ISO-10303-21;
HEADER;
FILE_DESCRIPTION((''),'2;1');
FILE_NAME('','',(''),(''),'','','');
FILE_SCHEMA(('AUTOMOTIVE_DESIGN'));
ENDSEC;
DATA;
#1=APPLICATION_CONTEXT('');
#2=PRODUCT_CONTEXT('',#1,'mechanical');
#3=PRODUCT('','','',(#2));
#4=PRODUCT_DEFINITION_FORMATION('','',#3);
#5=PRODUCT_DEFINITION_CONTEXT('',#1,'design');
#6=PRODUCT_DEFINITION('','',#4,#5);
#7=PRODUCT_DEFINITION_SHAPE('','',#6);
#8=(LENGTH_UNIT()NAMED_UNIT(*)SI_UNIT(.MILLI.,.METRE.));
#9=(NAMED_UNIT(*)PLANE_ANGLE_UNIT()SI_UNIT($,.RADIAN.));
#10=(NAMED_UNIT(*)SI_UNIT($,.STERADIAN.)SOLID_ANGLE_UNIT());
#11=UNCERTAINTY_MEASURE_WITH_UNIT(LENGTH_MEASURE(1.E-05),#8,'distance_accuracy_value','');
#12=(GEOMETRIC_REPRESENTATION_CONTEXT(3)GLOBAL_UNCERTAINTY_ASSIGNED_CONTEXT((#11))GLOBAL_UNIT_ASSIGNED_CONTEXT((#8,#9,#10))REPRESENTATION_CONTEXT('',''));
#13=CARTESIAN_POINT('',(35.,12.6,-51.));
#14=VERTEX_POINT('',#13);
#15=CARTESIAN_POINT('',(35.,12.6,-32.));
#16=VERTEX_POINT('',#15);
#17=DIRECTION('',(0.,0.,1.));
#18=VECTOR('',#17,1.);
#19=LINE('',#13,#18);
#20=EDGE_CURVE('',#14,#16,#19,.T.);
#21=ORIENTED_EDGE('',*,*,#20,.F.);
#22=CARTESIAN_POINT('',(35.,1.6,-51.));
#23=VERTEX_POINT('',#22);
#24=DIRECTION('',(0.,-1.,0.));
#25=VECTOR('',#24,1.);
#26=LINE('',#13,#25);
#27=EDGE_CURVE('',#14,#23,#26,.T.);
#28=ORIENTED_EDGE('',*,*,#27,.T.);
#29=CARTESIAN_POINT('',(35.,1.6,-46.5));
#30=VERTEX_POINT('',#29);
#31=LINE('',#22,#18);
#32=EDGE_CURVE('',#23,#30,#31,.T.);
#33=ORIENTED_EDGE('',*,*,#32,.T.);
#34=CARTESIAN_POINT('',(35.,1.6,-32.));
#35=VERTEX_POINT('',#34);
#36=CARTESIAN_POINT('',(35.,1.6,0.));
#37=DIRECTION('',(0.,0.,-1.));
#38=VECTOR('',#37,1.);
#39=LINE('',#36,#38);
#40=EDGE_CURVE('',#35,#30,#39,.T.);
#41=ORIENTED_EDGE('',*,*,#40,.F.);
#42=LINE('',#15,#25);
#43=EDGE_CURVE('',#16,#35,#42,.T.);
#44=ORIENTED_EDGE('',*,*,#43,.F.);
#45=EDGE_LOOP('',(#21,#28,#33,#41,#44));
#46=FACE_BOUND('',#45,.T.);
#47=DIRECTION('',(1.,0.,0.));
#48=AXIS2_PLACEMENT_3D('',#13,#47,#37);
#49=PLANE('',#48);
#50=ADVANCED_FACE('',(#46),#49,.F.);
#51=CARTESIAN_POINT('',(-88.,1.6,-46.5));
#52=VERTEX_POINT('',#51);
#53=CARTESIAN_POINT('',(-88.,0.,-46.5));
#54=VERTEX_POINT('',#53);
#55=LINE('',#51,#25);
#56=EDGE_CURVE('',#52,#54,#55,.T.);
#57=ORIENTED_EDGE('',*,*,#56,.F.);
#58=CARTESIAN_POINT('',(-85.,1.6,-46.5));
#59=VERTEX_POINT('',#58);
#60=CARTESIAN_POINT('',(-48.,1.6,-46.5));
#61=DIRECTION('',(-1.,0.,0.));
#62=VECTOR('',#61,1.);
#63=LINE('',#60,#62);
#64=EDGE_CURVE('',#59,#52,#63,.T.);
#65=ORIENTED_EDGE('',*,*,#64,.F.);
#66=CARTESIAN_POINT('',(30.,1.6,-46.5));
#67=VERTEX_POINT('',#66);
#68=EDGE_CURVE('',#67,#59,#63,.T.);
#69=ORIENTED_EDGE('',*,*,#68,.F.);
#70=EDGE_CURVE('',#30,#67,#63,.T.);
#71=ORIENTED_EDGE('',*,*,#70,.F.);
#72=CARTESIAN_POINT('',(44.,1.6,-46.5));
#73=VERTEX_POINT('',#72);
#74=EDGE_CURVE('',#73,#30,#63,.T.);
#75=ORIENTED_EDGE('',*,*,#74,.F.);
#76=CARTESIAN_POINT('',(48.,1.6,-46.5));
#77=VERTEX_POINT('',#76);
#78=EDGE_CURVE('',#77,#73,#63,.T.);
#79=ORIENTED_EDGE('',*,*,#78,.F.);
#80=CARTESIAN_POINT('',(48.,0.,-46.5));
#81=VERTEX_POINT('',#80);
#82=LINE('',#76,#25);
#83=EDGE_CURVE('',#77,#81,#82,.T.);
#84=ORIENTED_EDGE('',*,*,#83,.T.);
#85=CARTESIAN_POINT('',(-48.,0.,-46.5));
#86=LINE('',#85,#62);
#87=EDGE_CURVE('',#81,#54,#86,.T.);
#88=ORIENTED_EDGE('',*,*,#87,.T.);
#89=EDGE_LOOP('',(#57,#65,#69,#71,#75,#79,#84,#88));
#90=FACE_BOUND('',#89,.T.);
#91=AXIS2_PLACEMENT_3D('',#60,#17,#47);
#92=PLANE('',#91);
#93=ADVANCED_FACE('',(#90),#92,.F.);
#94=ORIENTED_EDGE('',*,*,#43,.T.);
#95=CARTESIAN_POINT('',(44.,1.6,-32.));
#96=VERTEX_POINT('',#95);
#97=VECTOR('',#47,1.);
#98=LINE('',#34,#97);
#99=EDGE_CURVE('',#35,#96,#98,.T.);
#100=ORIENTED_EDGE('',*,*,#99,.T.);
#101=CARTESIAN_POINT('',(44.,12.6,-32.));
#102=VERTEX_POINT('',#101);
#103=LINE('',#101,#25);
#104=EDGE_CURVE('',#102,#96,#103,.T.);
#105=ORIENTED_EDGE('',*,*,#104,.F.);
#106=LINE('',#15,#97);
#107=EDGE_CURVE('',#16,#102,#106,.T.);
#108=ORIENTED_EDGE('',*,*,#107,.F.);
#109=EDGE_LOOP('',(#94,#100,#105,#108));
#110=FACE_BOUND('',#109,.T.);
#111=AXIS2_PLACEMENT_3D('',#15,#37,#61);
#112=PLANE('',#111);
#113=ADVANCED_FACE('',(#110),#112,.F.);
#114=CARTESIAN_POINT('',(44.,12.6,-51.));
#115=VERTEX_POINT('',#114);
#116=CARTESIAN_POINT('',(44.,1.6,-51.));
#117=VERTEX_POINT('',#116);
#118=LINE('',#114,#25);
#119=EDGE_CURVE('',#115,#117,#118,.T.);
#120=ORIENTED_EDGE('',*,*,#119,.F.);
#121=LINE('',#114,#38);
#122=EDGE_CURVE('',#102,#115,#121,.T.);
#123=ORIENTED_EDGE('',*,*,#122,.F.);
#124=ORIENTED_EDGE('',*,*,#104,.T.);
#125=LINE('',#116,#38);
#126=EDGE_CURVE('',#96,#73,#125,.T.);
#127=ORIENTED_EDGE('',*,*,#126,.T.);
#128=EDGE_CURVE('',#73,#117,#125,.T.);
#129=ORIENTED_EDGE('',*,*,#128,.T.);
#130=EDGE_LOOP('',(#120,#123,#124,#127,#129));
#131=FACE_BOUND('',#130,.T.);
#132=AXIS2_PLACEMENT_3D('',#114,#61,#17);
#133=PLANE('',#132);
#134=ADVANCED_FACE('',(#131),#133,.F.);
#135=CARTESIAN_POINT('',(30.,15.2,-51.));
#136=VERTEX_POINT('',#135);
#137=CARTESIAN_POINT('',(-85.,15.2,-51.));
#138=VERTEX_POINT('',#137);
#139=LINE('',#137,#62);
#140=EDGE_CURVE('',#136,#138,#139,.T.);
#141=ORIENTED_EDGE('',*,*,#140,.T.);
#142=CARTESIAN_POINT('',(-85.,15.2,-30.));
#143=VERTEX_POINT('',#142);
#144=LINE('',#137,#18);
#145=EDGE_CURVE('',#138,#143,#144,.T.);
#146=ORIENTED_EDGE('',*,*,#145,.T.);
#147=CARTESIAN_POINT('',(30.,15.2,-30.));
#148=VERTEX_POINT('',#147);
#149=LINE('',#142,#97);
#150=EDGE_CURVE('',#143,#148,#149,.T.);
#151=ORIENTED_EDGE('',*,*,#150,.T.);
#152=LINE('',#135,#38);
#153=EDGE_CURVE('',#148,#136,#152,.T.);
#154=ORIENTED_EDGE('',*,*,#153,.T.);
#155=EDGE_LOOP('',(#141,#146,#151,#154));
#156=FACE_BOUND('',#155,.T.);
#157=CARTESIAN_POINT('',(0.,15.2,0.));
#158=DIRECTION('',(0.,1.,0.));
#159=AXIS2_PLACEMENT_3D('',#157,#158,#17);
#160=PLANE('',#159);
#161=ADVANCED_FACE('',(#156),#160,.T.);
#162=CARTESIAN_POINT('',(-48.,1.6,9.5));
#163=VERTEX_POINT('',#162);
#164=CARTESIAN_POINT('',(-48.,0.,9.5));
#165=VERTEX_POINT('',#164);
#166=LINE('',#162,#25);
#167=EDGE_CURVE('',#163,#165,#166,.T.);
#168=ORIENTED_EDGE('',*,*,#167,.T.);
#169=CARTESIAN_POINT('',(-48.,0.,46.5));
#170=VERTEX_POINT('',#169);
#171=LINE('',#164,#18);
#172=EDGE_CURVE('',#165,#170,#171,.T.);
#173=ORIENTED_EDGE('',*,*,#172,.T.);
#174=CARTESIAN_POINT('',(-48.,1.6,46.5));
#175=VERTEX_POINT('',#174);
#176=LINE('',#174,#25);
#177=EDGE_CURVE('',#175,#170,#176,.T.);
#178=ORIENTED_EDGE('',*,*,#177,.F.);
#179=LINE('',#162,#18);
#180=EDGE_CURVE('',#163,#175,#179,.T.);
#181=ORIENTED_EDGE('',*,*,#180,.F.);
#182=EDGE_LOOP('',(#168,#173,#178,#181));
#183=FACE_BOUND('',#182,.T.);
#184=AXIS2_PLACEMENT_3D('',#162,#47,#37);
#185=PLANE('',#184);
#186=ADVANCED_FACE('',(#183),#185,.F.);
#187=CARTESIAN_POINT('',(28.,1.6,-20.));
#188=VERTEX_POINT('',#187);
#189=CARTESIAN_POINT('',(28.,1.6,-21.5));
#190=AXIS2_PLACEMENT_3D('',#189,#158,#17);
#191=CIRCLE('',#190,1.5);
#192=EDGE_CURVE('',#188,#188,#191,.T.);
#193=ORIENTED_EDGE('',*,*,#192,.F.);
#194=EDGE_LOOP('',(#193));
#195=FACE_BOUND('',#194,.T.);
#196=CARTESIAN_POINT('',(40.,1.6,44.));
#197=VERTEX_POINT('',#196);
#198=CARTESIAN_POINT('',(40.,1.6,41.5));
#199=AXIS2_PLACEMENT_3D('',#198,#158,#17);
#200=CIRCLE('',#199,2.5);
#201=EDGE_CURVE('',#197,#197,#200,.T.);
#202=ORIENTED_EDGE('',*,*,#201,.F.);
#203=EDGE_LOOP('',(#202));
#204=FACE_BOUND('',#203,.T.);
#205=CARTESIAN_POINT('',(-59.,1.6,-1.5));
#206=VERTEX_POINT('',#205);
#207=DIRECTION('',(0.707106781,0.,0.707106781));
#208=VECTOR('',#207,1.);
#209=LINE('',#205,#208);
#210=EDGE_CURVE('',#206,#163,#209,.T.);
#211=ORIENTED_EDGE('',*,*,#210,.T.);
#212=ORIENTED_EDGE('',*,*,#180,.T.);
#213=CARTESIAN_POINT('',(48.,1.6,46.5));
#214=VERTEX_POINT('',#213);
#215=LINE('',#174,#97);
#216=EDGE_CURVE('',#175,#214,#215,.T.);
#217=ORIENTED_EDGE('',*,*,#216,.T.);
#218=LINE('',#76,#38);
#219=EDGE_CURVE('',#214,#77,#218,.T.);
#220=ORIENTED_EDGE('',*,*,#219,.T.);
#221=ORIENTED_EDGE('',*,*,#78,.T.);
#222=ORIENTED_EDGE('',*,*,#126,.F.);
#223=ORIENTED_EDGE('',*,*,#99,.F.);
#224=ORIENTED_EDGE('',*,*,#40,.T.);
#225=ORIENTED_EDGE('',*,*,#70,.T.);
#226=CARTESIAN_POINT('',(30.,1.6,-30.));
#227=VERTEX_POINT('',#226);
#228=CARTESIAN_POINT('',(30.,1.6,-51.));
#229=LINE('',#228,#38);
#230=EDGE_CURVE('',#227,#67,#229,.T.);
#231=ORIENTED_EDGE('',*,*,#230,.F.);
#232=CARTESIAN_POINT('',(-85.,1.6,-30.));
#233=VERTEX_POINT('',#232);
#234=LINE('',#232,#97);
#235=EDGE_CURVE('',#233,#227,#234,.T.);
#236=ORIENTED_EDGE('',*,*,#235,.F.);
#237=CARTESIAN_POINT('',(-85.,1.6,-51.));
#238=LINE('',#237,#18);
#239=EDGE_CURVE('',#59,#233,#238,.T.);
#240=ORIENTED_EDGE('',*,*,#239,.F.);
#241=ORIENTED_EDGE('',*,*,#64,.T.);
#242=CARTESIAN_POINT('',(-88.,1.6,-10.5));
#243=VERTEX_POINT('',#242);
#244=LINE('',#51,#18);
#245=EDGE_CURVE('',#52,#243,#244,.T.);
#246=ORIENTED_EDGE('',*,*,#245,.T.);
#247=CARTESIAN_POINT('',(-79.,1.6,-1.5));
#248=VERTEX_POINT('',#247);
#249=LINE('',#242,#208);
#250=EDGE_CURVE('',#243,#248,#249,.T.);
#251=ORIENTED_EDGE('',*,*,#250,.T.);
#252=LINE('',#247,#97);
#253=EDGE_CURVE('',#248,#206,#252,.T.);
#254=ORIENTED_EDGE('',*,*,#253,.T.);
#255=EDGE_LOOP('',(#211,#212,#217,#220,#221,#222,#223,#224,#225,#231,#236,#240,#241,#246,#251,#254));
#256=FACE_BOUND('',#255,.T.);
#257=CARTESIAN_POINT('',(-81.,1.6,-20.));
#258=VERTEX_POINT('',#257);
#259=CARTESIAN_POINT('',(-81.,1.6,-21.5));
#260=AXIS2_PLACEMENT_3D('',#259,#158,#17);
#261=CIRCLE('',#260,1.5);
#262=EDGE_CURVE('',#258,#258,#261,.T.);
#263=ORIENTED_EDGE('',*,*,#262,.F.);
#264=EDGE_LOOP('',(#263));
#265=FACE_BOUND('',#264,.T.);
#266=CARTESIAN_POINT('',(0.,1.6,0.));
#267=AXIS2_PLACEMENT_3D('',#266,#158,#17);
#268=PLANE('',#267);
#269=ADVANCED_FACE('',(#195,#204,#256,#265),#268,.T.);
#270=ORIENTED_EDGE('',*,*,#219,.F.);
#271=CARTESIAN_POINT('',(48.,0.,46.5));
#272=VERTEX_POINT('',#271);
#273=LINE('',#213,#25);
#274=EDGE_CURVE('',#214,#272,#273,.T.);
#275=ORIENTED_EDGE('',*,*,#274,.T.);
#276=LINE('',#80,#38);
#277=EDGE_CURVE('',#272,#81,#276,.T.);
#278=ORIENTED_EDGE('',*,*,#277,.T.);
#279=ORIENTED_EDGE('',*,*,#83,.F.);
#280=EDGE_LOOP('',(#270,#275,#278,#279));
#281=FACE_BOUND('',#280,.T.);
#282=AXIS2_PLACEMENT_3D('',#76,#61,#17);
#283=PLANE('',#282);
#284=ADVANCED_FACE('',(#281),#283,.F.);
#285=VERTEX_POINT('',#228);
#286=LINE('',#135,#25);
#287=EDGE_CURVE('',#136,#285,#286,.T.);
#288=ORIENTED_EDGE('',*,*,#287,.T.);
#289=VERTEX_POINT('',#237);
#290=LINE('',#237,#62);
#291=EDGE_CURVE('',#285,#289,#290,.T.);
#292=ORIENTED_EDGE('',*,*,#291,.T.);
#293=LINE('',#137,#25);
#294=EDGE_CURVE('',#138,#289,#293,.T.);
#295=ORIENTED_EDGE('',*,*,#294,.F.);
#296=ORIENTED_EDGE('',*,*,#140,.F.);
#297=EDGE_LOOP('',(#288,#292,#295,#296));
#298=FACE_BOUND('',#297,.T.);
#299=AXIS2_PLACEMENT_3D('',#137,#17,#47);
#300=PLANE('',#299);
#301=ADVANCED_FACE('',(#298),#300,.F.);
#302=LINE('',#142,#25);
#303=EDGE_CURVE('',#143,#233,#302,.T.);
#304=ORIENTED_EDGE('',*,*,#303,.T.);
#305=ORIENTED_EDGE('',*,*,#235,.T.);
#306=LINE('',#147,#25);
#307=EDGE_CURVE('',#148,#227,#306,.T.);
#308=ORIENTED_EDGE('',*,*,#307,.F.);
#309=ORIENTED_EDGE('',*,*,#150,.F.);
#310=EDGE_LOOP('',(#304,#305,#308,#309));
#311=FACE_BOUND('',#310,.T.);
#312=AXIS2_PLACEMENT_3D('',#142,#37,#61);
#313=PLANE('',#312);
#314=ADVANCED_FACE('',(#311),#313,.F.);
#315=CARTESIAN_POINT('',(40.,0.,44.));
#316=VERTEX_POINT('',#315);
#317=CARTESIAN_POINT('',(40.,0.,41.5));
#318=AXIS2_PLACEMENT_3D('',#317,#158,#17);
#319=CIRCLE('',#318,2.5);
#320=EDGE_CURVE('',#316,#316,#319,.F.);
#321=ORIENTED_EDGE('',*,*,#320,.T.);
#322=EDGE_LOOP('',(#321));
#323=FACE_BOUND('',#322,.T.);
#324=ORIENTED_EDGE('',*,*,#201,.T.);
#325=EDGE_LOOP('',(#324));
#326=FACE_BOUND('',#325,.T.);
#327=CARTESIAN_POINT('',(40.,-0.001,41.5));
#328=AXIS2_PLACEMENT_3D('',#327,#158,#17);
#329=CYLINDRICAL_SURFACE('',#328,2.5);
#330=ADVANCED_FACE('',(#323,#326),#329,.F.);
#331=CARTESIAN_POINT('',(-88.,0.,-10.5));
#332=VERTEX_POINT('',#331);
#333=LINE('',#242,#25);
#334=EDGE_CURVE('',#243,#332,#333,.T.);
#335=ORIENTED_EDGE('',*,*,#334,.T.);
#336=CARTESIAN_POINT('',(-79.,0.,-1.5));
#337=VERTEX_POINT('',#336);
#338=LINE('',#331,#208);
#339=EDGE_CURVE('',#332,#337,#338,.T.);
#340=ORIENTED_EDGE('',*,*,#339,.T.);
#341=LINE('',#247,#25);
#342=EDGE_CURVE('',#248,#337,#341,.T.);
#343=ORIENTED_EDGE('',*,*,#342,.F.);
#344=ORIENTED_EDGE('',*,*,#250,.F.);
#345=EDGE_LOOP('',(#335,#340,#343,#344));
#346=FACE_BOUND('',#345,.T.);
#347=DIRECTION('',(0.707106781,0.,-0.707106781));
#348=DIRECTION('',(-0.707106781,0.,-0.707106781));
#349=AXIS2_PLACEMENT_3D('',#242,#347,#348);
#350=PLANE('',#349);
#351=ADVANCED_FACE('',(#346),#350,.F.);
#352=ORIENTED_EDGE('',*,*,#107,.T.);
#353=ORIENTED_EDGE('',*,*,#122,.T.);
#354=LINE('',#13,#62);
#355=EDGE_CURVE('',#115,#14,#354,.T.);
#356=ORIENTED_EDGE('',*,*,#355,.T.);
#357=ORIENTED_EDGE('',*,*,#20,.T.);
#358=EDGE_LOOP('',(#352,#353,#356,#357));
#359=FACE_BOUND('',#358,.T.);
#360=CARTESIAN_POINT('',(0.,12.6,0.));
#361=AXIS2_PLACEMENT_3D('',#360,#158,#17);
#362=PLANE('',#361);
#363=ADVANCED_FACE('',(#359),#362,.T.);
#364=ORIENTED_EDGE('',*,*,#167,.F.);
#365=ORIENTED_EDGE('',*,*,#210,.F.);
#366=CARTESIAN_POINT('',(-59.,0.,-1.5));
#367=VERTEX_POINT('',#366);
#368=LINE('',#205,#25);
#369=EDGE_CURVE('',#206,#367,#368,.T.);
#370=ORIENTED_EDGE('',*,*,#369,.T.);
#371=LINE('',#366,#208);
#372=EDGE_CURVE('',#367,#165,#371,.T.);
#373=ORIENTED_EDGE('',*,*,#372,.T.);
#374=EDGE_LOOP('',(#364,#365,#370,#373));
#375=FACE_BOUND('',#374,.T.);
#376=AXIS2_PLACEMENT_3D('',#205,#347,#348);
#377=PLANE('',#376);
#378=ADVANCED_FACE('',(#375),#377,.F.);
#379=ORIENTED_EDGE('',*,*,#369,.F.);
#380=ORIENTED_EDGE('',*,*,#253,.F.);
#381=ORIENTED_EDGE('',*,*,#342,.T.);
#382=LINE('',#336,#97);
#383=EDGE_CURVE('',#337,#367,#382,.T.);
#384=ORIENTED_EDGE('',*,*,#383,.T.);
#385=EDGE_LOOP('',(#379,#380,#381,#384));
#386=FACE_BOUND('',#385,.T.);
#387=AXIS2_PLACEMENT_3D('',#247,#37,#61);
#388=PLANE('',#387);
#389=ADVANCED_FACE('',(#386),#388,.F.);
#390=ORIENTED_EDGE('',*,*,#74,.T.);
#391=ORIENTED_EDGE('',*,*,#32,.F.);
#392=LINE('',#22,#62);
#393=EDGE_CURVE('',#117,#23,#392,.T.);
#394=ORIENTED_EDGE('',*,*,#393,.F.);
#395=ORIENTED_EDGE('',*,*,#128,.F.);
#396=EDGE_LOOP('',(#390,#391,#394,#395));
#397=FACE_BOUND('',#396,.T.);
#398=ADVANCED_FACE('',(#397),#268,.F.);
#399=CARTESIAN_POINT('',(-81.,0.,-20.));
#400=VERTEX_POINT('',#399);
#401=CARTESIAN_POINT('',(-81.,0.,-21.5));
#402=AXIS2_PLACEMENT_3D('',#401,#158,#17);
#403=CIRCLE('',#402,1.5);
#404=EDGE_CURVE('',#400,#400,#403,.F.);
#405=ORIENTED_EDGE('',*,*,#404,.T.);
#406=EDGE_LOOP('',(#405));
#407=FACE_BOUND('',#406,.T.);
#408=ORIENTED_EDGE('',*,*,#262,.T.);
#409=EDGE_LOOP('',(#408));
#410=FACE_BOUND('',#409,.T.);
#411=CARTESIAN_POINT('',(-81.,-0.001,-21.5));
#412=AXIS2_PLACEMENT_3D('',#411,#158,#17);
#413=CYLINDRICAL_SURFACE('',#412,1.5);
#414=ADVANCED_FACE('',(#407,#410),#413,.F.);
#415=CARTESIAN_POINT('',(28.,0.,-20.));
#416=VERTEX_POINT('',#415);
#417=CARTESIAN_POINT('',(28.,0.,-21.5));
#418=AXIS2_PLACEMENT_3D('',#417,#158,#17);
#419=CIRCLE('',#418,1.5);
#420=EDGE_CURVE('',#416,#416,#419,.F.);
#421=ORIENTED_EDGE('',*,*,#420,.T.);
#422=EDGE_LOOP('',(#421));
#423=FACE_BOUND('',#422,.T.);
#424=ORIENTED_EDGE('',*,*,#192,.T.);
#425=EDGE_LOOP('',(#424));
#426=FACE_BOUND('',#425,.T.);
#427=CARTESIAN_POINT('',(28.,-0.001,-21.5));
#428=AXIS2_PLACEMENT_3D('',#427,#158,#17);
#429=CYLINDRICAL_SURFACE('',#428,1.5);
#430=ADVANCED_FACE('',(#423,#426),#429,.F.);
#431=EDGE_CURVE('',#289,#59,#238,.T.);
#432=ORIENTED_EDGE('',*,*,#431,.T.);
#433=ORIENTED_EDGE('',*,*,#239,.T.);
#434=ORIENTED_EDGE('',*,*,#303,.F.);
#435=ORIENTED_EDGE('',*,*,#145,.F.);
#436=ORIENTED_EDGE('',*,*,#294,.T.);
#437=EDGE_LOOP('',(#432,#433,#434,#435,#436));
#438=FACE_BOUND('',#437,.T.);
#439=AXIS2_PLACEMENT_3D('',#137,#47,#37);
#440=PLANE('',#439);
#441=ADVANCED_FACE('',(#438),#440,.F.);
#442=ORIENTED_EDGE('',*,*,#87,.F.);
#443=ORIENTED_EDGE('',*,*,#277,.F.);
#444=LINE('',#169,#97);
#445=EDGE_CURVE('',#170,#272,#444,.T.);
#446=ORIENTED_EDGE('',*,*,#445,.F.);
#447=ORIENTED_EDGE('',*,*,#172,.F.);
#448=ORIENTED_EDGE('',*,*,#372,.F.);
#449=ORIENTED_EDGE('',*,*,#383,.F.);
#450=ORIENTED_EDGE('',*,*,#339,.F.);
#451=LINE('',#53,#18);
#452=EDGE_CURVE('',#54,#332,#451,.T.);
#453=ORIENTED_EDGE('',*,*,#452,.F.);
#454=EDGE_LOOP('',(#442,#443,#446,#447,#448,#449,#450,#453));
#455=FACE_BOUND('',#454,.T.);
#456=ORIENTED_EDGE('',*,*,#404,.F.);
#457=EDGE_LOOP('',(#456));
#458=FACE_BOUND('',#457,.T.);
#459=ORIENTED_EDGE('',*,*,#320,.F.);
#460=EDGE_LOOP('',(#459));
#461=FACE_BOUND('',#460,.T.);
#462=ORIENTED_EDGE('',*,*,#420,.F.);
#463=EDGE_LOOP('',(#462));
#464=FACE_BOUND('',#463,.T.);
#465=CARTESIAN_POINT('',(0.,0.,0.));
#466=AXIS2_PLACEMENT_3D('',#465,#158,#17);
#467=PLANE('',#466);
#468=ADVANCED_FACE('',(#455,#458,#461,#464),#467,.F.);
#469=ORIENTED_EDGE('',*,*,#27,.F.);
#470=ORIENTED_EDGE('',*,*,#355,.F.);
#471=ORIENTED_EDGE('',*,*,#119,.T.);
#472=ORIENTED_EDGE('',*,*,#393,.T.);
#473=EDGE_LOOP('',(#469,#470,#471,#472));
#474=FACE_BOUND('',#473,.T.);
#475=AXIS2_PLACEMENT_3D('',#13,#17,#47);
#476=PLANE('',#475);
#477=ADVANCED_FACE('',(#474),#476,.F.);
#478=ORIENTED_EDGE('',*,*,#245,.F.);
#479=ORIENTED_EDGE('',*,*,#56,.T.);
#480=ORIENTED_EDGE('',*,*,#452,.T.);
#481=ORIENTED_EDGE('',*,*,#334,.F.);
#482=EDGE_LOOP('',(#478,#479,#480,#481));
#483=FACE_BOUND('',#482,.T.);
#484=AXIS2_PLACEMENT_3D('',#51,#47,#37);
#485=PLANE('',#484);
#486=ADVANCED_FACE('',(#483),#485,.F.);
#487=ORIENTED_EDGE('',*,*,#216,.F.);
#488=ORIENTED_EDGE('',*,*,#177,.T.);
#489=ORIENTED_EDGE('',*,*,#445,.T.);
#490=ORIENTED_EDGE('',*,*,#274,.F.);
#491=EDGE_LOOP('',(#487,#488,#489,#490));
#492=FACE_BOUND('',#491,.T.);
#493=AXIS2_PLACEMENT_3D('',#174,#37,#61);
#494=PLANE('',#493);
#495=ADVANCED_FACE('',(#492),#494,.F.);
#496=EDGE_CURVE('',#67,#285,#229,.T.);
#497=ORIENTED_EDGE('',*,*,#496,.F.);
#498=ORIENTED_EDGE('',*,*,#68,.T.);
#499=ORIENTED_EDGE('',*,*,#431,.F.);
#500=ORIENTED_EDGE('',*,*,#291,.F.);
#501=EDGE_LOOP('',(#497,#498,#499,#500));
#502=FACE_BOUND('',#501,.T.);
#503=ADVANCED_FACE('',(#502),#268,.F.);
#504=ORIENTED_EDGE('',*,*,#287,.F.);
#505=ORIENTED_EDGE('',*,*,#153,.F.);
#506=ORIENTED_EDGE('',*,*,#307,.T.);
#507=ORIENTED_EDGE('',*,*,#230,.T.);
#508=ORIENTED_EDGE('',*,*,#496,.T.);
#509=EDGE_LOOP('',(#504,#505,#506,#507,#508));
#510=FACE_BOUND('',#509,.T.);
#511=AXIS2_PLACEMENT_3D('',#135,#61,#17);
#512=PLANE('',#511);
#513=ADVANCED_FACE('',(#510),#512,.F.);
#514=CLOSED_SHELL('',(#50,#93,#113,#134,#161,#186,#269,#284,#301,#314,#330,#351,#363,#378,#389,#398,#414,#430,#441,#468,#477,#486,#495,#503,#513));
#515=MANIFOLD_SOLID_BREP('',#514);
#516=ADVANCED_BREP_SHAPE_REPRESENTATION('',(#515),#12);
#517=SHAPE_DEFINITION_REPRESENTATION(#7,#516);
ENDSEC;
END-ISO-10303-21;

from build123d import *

# Parameters (mm, degrees)
BOSS_EXTRUDE1_DEPTH      = 1.6
SKETCH2_W                = 115
SKETCH2_H                = 21
BOSS_EXTRUDE2_DEPTH      = 13.6
CUT_EXTRUDE1_OUTLINE_R   = 2.5
CUT_EXTRUDE1_OUTLINE_R_2 = 1.5
CUT_EXTRUDE1_DEPTH       = 1.6
SKETCH5_W                = 9
SKETCH5_H                = 19
BOSS_EXTRUDE3_DEPTH      = 11


# Read off the part's stored shape, not the designer's step: Cut-Extrude1
with BuildPart() as part:
    # Sketch1 (on Top Plane) → Boss-Extrude1 (new body)
    with BuildSketch(Plane(origin=(0, 0, 0), x_dir=(1, 0, 0), z_dir=(0, 1, 0))):
        Polygon((-48, 46.5), (-88, 46.5), (-88, 10.5), (-79, 1.5), (-59, 1.5), (-48, -9.5), (-48, -46.5), (48, -46.5), (48, 46.5), align=None)
    extrude(amount=BOSS_EXTRUDE1_DEPTH)

    # Sketch2 → Boss-Extrude2 (add)
    with BuildSketch(Plane(origin=(0, 1.6, 0), x_dir=(1, 0, 0), z_dir=(0, 1, 0))):
        with Locations((-27.5, 40.5)):
            Rectangle(SKETCH2_W, SKETCH2_H)
    extrude(amount=BOSS_EXTRUDE2_DEPTH)

    # Cut-Extrude1 outline → Cut-Extrude1 (cut)
    with BuildSketch(Plane(origin=(0, 0, 0), x_dir=(1, 0, 0), z_dir=(0, 1, 0))):
        with Locations((40, -41.5)):
            Circle(CUT_EXTRUDE1_OUTLINE_R)
        with Locations((28, 21.5)):
            Circle(CUT_EXTRUDE1_OUTLINE_R_2)
        with Locations((-81, 21.5)):
            Circle(CUT_EXTRUDE1_OUTLINE_R_2)
    extrude(amount=CUT_EXTRUDE1_DEPTH, mode=Mode.SUBTRACT)

    # Sketch5 → Boss-Extrude3 (add)
    with BuildSketch(Plane(origin=(0, 1.6, 0), x_dir=(1, 0, 0), z_dir=(0, 1, 0))):
        with Locations((39.5, 41.5)):
            Rectangle(SKETCH5_W, SKETCH5_H)
    extrude(amount=BOSS_EXTRUDE3_DEPTH)


solid = part.part
